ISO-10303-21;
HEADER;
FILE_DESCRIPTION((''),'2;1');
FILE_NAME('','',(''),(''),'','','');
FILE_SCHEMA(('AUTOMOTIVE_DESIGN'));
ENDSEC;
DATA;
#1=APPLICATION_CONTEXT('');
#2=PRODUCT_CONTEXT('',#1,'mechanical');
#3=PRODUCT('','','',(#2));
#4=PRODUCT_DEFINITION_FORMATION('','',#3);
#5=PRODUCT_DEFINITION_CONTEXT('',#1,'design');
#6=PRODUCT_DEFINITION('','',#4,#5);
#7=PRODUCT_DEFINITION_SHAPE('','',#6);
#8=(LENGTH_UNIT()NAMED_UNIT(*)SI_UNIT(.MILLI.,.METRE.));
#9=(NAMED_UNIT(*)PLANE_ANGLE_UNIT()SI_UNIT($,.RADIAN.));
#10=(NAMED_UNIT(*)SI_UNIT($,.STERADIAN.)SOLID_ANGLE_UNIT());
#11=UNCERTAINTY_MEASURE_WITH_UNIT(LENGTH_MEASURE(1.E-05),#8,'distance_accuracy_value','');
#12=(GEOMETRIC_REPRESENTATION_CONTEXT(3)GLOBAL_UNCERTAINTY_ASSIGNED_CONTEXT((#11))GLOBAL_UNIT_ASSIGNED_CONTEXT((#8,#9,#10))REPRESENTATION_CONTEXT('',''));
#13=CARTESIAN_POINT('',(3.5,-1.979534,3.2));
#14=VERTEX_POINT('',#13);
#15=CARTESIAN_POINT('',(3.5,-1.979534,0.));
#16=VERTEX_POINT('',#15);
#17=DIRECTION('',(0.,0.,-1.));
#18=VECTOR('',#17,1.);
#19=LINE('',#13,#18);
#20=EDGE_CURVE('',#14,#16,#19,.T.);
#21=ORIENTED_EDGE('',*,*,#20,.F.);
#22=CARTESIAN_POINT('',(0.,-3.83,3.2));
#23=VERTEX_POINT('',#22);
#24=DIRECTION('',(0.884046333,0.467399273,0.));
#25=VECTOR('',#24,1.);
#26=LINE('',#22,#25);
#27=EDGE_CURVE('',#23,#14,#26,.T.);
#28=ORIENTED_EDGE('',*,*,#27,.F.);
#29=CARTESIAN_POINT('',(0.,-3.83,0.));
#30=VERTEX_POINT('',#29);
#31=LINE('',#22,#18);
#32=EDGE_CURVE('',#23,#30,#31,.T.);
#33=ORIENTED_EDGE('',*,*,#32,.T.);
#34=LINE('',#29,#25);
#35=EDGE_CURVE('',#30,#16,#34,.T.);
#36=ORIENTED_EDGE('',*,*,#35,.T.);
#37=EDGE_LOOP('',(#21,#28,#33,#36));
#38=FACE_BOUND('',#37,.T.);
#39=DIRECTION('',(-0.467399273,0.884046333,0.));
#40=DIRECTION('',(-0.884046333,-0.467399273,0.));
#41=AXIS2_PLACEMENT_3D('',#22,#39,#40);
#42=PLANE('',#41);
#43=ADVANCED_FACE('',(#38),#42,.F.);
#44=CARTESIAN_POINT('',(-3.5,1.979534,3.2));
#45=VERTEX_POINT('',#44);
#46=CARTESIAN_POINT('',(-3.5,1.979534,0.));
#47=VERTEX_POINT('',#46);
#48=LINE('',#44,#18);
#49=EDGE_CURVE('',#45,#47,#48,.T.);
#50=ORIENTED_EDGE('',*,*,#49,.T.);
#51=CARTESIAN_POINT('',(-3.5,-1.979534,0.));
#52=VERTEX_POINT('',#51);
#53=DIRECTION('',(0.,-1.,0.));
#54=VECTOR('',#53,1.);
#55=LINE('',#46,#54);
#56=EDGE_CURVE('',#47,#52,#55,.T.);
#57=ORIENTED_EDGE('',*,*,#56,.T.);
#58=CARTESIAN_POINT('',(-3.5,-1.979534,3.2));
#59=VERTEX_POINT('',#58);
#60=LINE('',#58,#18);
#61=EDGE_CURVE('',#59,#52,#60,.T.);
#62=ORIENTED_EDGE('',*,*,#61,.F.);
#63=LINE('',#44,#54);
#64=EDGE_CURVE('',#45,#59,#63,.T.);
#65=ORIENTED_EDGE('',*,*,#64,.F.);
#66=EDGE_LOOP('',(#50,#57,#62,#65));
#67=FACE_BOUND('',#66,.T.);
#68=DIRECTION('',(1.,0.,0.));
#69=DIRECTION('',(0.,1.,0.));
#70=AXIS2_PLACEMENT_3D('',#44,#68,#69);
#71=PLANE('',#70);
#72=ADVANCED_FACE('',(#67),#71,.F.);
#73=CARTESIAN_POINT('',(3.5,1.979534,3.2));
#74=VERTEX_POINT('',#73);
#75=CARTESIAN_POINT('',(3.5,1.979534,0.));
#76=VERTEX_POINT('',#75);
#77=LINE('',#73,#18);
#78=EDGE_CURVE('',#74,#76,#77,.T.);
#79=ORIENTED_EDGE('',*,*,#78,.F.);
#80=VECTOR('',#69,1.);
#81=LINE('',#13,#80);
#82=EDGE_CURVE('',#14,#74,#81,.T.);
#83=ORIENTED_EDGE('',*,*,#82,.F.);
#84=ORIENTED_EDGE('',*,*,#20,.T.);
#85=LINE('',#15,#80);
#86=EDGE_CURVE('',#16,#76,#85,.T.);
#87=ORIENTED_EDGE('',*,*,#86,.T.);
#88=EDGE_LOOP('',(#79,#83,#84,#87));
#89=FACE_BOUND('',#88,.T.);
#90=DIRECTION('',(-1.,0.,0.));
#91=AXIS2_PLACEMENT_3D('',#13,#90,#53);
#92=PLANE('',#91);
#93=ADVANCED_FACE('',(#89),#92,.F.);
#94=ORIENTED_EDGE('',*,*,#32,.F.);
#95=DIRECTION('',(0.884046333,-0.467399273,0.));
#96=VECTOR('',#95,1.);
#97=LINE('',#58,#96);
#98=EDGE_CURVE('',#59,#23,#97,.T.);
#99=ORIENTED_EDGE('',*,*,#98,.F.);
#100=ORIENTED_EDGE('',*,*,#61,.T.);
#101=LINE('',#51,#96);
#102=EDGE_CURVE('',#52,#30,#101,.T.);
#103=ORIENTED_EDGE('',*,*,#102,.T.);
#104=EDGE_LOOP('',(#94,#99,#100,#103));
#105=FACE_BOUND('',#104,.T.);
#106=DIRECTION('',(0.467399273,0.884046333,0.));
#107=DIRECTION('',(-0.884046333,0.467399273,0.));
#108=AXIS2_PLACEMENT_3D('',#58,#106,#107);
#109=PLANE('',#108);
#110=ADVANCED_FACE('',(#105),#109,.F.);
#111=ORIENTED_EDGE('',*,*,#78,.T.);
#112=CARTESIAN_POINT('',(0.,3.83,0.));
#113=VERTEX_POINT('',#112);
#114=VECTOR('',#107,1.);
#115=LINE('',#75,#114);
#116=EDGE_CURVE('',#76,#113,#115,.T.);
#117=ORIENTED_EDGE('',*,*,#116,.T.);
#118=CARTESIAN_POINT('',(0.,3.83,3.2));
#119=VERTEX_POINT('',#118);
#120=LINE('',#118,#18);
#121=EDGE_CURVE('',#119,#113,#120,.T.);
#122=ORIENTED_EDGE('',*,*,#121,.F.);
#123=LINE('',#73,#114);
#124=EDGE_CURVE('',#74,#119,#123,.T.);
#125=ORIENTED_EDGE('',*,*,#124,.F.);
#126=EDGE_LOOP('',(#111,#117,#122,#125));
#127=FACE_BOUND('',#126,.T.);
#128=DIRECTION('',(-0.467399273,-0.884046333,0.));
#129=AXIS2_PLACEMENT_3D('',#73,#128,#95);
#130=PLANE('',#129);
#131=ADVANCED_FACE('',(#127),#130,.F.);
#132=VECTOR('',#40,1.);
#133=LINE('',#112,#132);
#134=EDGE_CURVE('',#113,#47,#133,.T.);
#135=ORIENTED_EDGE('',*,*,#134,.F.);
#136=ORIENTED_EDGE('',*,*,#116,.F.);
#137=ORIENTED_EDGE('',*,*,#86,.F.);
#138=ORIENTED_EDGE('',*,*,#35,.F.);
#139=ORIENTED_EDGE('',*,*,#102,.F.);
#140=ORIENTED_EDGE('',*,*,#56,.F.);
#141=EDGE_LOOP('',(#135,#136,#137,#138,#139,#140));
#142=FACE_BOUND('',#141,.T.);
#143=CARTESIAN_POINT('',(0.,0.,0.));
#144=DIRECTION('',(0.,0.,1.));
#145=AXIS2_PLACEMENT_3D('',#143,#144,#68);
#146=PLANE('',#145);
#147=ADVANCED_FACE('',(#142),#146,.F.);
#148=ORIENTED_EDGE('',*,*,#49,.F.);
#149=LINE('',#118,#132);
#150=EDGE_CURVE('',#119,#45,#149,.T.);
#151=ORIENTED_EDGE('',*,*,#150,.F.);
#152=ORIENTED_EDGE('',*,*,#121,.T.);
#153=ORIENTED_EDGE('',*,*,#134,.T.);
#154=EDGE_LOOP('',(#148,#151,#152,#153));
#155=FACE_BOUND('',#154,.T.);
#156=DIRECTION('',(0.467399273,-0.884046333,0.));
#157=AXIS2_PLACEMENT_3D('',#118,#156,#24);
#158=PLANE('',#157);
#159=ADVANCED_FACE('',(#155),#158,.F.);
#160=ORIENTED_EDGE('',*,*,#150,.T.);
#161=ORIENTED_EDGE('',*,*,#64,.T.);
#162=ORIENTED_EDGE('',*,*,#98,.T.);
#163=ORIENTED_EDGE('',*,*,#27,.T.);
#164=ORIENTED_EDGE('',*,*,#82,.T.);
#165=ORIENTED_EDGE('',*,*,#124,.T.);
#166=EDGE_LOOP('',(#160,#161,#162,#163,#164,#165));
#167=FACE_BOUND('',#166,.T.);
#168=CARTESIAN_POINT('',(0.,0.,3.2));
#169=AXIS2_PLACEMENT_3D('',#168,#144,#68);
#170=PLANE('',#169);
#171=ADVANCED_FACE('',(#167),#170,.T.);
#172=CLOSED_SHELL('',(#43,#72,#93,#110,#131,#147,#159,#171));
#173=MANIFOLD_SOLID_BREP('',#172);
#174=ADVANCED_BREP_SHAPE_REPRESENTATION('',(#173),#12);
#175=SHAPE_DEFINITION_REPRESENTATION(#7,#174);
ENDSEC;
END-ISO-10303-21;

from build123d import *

# Parameters (mm, degrees)
EXTRUDE_1_DEPTH = 3.2


with BuildPart() as part:
    # Эскиз1 → Бобышка-Вытянуть1 (new body)
    with BuildSketch(Plane.XY):
        Polygon((3.5, 1.979534255), (0, 3.83), (-3.5, 1.979534255), (-3.5, -1.979534255), (0, -3.83), (3.5, -1.979534255), align=None)
    extrude(amount=EXTRUDE_1_DEPTH)


solid = part.part
